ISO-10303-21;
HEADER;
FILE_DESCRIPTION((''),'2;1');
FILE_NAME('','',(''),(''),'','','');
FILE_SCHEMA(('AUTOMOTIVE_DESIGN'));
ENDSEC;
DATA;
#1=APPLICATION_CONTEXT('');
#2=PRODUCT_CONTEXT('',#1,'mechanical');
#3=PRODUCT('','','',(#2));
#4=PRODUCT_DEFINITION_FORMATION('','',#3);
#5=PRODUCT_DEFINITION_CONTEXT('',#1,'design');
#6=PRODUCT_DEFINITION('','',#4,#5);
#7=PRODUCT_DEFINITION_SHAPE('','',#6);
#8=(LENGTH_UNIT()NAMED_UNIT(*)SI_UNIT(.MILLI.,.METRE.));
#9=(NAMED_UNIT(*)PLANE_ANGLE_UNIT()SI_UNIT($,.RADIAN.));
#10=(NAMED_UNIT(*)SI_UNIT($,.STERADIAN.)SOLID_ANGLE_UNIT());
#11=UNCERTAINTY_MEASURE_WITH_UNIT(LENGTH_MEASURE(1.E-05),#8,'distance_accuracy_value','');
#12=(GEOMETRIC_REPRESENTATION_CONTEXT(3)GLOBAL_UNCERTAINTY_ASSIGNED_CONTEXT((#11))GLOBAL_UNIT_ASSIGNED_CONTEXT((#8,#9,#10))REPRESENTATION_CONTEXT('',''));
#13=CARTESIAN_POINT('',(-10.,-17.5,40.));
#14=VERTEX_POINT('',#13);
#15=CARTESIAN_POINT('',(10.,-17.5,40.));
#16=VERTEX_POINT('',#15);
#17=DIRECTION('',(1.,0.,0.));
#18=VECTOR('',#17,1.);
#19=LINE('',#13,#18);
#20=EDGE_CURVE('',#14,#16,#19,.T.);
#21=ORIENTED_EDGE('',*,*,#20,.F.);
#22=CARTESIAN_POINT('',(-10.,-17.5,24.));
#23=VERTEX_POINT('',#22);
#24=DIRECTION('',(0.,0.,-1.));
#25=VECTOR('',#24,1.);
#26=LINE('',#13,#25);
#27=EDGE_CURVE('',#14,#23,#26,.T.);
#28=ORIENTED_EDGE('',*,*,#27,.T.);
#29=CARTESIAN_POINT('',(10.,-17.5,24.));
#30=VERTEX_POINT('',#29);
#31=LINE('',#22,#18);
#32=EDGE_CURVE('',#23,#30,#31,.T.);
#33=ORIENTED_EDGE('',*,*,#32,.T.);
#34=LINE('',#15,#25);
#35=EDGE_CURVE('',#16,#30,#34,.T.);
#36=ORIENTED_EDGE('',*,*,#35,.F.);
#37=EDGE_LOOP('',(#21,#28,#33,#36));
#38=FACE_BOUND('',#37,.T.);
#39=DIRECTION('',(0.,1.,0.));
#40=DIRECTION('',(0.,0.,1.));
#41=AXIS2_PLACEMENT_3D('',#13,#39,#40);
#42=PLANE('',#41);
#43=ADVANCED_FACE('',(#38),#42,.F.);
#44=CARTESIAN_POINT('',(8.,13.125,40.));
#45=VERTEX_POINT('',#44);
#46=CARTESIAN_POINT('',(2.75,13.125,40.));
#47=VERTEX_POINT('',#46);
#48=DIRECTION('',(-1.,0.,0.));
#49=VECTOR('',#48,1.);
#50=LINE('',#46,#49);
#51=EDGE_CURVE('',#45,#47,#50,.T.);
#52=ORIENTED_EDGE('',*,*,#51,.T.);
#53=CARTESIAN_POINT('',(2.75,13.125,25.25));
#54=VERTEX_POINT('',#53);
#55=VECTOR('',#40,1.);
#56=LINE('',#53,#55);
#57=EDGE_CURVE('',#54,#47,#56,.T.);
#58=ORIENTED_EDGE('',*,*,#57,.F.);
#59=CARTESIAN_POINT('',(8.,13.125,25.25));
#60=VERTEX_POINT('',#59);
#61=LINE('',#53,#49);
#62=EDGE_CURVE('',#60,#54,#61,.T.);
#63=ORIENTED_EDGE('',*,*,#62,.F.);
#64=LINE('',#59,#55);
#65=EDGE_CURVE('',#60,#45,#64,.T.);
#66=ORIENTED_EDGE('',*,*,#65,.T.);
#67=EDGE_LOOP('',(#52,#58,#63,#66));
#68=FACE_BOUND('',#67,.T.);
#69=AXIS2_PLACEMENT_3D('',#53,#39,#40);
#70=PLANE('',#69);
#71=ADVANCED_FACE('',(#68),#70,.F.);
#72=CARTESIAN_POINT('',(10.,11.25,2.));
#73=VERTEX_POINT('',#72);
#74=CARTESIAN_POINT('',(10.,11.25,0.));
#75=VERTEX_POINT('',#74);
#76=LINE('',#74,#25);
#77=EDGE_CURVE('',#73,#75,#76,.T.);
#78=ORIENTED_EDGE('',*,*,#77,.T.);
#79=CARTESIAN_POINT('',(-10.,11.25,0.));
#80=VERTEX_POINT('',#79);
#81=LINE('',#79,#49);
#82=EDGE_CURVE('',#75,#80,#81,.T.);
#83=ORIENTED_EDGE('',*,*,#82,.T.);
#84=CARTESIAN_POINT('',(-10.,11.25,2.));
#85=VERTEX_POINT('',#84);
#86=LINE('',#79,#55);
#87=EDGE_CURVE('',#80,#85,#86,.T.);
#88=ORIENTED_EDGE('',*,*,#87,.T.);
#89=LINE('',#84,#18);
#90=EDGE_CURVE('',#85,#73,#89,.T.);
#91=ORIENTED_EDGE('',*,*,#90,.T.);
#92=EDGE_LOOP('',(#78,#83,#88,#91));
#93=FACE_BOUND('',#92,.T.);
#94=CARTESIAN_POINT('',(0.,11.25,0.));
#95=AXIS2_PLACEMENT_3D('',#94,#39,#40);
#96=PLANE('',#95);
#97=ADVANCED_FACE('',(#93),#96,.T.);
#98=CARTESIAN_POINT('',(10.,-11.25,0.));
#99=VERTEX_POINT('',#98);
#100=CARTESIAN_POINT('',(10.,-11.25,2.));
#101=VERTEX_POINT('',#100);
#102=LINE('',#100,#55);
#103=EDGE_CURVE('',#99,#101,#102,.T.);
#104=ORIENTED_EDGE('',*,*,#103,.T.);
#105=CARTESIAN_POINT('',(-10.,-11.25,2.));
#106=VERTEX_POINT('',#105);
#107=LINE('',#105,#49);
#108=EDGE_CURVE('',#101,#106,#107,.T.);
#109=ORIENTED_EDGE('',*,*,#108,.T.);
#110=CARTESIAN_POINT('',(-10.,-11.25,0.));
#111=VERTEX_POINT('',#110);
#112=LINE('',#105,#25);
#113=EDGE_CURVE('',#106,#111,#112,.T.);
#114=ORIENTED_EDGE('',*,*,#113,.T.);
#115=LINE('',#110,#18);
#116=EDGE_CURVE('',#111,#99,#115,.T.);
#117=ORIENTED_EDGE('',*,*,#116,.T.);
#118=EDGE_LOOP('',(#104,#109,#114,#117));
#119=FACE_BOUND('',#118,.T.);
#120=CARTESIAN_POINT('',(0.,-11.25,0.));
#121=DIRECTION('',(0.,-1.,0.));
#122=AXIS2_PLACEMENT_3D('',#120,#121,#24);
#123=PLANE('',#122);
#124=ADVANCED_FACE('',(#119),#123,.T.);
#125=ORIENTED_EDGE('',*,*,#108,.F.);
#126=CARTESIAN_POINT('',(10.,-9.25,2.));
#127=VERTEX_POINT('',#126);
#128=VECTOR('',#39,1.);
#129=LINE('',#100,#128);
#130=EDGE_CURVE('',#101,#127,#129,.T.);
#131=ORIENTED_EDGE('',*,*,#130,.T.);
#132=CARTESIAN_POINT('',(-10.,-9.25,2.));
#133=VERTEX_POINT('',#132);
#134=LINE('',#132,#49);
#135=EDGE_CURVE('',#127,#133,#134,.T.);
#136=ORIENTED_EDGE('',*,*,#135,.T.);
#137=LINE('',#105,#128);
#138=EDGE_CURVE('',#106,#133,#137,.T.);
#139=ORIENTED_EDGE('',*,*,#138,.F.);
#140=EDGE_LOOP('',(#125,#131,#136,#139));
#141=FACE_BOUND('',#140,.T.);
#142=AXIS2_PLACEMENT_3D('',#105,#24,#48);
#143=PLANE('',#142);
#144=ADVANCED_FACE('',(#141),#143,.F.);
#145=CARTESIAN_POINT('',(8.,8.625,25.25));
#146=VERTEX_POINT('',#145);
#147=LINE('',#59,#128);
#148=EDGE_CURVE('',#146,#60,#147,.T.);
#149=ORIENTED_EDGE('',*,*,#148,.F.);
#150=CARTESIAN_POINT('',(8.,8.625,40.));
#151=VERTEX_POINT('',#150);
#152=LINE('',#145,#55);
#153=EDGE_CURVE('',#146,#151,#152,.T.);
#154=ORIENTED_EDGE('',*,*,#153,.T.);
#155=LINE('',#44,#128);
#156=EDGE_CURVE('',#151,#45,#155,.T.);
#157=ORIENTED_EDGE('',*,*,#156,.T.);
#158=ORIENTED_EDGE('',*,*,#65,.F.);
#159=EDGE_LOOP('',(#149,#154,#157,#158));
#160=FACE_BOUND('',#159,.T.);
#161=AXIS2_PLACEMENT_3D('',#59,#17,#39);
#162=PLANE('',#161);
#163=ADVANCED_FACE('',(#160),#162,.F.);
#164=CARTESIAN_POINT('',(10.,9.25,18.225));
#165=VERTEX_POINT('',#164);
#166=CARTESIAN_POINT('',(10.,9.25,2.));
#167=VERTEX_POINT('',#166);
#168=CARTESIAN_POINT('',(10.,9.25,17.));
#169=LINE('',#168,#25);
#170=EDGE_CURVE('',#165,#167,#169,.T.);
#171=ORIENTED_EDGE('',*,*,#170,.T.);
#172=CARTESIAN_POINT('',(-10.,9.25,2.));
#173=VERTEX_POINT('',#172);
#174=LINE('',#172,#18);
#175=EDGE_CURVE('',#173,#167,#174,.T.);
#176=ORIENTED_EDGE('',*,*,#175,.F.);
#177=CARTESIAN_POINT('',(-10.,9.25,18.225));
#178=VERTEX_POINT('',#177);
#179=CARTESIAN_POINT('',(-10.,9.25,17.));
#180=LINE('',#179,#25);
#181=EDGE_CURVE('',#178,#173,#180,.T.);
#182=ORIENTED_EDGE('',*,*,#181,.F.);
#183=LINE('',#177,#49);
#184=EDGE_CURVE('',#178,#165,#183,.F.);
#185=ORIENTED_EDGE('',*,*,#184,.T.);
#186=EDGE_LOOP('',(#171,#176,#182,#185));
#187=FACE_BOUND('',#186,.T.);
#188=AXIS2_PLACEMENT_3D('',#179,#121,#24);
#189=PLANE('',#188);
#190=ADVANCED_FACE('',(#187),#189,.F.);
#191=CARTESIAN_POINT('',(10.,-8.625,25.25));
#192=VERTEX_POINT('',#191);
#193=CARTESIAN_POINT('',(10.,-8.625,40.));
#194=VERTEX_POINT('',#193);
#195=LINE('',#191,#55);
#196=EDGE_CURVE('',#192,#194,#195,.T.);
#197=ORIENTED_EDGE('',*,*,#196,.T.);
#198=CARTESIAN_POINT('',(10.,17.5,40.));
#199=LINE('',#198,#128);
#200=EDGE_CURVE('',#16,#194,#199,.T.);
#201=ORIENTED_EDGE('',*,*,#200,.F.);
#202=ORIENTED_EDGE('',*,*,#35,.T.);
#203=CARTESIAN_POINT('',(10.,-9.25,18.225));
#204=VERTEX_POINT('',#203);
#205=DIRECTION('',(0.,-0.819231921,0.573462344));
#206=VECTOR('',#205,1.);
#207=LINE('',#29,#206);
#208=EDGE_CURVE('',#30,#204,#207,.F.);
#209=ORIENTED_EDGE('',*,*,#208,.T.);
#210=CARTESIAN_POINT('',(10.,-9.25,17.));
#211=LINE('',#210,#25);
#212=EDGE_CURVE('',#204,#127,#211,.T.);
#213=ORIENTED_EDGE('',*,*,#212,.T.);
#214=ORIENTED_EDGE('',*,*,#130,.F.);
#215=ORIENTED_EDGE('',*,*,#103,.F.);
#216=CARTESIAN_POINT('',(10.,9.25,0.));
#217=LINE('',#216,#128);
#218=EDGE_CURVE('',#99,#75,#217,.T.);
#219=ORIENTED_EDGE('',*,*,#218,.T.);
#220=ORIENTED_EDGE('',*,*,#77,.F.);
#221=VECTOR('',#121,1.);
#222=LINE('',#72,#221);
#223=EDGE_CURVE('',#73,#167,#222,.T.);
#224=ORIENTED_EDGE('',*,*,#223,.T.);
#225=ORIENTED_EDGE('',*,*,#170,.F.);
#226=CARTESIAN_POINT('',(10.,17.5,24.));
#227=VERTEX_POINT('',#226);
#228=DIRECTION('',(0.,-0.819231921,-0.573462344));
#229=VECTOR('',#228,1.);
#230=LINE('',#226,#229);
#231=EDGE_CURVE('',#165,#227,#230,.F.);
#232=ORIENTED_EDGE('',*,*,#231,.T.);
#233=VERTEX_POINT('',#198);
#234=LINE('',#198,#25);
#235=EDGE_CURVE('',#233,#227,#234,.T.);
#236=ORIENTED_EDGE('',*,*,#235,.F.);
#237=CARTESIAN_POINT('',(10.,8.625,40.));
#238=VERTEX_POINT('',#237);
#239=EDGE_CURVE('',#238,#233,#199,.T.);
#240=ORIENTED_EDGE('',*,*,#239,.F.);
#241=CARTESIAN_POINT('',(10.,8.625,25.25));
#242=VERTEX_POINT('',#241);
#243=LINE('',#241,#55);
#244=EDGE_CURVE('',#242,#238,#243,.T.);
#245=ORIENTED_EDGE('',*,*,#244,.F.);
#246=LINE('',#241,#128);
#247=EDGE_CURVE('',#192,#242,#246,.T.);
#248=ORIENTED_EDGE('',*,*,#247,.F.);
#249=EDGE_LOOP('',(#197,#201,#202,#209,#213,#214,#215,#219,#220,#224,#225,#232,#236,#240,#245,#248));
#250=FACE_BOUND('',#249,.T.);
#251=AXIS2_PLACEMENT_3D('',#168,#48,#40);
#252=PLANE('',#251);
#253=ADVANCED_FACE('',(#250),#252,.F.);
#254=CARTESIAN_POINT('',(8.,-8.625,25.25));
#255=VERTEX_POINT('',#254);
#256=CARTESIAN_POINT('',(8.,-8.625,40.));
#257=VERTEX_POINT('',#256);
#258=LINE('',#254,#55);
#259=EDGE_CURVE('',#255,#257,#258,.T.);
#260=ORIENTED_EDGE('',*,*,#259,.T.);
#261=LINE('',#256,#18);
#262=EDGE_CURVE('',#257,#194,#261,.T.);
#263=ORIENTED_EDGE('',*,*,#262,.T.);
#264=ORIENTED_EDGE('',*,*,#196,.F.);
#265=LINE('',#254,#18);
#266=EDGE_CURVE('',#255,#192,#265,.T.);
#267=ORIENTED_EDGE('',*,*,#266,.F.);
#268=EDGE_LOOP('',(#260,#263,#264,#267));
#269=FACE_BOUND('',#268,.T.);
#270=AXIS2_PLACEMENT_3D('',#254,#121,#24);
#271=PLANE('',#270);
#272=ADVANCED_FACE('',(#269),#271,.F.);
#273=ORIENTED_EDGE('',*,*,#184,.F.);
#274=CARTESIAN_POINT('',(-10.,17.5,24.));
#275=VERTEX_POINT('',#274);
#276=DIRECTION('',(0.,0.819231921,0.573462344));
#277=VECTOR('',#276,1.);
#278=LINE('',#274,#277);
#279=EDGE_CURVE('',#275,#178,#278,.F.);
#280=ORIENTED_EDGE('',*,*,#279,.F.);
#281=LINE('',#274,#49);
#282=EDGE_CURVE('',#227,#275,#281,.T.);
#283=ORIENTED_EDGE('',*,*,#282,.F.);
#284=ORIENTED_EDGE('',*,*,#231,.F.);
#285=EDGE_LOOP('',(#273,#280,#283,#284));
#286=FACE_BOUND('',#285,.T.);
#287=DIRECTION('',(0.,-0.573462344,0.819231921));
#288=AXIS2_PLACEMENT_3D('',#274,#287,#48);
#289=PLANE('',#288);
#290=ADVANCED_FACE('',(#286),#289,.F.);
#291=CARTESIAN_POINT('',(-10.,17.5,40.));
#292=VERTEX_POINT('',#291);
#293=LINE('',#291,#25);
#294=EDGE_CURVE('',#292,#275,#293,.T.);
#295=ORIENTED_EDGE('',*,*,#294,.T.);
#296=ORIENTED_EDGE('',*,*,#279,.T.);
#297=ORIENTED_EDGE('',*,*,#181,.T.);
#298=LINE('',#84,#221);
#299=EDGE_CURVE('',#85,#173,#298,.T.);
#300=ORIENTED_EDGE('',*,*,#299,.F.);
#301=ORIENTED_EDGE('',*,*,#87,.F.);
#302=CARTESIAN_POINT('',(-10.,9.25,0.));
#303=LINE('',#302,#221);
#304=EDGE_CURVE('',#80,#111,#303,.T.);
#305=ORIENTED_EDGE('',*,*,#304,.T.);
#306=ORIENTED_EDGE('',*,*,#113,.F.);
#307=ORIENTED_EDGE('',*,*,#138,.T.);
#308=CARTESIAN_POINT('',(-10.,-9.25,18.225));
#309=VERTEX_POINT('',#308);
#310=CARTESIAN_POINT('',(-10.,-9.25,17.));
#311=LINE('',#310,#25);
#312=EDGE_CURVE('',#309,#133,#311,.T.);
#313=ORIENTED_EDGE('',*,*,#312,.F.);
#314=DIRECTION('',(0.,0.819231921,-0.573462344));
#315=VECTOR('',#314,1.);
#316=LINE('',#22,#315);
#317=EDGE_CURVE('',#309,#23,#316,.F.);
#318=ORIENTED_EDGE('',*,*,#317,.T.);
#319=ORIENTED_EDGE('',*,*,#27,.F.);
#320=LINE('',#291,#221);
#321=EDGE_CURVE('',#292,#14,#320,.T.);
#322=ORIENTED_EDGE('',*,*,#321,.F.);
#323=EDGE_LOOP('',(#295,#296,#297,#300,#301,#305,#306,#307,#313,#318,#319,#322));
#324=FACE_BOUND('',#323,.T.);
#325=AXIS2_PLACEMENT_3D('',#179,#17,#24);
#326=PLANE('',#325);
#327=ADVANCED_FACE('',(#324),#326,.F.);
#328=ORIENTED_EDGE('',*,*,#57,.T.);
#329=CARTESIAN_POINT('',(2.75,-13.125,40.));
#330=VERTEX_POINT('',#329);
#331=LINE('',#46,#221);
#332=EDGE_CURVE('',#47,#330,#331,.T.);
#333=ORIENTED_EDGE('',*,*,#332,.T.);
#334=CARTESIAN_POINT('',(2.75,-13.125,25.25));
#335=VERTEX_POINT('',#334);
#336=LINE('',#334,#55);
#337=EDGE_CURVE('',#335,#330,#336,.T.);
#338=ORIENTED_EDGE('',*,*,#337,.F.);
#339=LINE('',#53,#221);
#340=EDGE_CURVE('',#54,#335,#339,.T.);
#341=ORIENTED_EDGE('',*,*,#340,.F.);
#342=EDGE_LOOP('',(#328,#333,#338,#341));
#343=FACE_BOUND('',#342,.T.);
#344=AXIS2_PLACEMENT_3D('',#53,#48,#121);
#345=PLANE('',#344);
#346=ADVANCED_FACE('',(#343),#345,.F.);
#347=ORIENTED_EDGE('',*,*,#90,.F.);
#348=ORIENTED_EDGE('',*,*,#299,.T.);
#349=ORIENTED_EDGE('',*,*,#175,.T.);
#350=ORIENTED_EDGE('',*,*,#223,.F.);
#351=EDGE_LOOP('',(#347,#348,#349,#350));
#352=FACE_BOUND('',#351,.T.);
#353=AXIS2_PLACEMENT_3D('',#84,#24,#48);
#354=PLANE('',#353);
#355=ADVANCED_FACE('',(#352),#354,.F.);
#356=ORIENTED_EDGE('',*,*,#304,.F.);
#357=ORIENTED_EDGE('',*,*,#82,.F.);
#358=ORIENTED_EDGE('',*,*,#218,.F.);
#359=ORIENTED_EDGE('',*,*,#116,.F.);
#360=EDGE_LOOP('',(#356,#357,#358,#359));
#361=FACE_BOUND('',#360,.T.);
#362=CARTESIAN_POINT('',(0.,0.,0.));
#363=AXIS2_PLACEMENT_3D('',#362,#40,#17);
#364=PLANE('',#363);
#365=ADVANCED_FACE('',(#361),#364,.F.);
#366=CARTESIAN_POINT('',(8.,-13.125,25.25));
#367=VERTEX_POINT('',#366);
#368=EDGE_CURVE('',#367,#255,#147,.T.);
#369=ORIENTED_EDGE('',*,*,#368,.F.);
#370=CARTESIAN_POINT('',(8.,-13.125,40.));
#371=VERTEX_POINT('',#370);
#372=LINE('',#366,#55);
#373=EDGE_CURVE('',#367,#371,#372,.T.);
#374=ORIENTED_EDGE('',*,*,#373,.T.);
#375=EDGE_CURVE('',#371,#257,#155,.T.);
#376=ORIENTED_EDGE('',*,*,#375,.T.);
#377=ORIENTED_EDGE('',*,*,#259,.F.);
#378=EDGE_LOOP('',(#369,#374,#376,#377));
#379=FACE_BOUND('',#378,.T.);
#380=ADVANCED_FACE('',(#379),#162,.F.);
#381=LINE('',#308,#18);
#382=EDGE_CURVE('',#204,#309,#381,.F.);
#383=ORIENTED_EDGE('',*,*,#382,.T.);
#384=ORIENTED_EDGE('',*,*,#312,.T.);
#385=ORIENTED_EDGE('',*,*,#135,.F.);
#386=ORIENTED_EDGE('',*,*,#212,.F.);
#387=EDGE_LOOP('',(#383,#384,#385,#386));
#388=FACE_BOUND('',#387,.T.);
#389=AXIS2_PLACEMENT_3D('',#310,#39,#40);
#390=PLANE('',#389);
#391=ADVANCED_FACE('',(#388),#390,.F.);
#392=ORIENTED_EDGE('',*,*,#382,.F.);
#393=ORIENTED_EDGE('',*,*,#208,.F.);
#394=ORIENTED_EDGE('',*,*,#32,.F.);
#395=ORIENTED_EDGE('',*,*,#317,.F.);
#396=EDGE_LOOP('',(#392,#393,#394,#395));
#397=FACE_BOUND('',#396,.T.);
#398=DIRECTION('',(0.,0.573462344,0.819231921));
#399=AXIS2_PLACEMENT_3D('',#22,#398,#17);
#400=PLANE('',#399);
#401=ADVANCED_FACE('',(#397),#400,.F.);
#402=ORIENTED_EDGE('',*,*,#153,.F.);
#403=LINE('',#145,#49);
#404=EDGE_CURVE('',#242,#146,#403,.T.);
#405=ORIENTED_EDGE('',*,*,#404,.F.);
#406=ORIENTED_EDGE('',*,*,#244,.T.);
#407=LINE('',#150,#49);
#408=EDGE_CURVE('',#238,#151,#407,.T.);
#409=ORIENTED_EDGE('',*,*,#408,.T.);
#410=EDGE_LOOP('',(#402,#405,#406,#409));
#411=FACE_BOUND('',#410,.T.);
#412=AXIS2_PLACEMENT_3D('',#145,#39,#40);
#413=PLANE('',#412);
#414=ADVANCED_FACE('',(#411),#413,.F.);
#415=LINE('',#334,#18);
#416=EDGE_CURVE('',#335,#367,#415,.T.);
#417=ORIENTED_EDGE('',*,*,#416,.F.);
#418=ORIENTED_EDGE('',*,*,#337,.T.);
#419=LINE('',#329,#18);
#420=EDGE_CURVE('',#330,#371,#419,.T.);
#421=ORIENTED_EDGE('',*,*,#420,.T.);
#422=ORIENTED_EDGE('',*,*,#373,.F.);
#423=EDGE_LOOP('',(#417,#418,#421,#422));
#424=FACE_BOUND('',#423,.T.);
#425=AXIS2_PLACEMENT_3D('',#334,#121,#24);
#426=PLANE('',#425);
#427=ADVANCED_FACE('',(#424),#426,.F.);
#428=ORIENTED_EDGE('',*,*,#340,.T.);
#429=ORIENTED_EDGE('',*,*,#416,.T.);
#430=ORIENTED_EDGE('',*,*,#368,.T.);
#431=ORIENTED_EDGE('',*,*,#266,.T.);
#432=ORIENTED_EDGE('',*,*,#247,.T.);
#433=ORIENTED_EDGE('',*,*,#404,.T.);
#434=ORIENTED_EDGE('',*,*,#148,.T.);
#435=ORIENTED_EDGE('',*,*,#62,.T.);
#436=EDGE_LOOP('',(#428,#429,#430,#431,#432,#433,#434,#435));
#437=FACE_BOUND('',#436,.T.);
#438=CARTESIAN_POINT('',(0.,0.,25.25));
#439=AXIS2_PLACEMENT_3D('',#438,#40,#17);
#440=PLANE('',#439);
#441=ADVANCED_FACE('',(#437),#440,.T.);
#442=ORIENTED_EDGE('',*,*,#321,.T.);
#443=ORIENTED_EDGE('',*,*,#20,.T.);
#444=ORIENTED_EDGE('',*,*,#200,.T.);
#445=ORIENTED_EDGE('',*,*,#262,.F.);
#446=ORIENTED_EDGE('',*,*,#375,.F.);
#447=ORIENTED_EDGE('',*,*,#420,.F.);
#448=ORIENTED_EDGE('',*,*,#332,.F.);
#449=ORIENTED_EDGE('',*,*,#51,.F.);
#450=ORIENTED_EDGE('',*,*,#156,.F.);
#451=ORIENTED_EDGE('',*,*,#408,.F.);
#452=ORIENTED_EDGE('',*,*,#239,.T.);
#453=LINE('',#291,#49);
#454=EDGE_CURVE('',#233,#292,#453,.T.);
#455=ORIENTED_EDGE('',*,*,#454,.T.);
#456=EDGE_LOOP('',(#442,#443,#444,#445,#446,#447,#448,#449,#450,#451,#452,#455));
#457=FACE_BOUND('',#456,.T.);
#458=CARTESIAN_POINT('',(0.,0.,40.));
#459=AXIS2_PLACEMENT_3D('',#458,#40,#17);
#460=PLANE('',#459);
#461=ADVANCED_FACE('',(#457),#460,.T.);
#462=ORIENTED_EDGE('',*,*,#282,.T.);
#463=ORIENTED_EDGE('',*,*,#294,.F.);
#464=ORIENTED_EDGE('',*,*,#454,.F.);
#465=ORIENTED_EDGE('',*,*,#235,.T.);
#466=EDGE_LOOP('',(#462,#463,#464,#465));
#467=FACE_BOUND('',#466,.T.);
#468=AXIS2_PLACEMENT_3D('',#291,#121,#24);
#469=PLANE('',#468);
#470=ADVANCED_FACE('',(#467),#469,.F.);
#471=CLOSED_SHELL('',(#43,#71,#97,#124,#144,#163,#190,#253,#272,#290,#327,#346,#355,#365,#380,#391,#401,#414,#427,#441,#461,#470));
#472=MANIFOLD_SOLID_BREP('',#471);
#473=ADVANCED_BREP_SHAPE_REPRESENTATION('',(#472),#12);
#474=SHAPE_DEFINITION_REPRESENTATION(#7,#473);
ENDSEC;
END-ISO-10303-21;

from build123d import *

# Parameters (mm, degrees)
IZIM1_W                     = 20
IZIM1_H                     = 18.5
Y_KSEKLIK_EKSTR_ZYON1_DEPTH = 17
IZIM2_W                     = 20
IZIM2_H                     = 2
Y_KSEKLIK_EKSTR_ZYON2_DEPTH = 2
IZIM3_W                     = 20
IZIM3_H                     = 2
Y_KSEKLIK_EKSTR_ZYON3_DEPTH = 2
IZIM4_W                     = 20
IZIM4_H                     = 35
Y_KSEKLIK_EKSTR_ZYON4_DEPTH = 23
PAH1_SIZE                   = 7
PAH1_SIZE_2                 = 10
PAH2_SIZE                   = 7
PAH2_SIZE_2                 = 10
IZIM5_W                     = 5.25
IZIM5_H                     = 26.25
KES_EKSTR_ZYON2_DEPTH       = 14.75
IZIM6_W                     = 2
IZIM6_H                     = 17.25
KES_EKSTR_ZYON3_DEPTH       = 14.75


with BuildPart() as part:
    # Çizim1 → Yükseklik-Ekstrüzyon1 (new body)
    with BuildSketch(Plane.XY):
        Rectangle(IZIM1_W, IZIM1_H)
    extrude(amount=Y_KSEKLIK_EKSTR_ZYON1_DEPTH)

    # Çizim2 → Yükseklik-Ekstrüzyon2 (add)
    with BuildSketch(Plane.XZ.offset(9.25)):
        with Locations((0, 1)):
            Rectangle(IZIM2_W, IZIM2_H)
    extrude(amount=Y_KSEKLIK_EKSTR_ZYON2_DEPTH)

    # Çizim3 → Yükseklik-Ekstrüzyon3 (add)
    with BuildSketch(Plane(origin=(0, 9.25, 0), x_dir=(1, 0, 0), z_dir=(0, 1, 0))):
        with Locations((0, -1)):
            Rectangle(IZIM3_W, IZIM3_H)
    extrude(amount=Y_KSEKLIK_EKSTR_ZYON3_DEPTH)

    # Çizim4 → Yükseklik-Ekstrüzyon4 (add)
    with BuildSketch(Plane.XY.offset(17)):
        Rectangle(IZIM4_W, IZIM4_H)
    extrude(amount=Y_KSEKLIK_EKSTR_ZYON4_DEPTH)

    # Pah1
    # the kernel refuses this chamfer: 10, 7 mm, written as the material it takes off along each edge
    with BuildSketch(Plane(origin=(-35.825599626, 17.5, 17), x_dir=(0, 0.045281396304095924, 0.9989742715149131), z_dir=(1, 0, 0))) as pah1_piece_1_section:
        Polygon((PAH1_SIZE * 0.998974271515, PAH1_SIZE * 0.0452813963041), (-PAH1_SIZE_2 * 0.0452813963041, PAH1_SIZE_2 * 0.998974271515), (0, 0), align=None)
    pah1_piece_1 = extrude(amount=71.651199251, mode=Mode.PRIVATE)
    pah1_piece_1 = split(pah1_piece_1, bisect_by=Plane(origin=(0, 9.25, 19.372622849), z_dir=(0, 1, 0)), keep=Keep.TOP, mode=Mode.PRIVATE)
    add(pah1_piece_1, mode=Mode.SUBTRACT)

    # Pah2
    # the kernel refuses this chamfer: 10, 7 mm, written as the material it takes off along each edge
    with BuildSketch(Plane(origin=(35.825599626, -17.5, 17), x_dir=(0, -0.045281396304095924, 0.9989742715149131), z_dir=(-1, 0, 0))) as pah2_piece_1_section:
        Polygon((PAH2_SIZE * 0.998974271515, PAH2_SIZE * 0.0452813963041), (-PAH2_SIZE_2 * 0.0452813963041, PAH2_SIZE_2 * 0.998974271515), (0, 0), align=None)
    pah2_piece_1 = extrude(amount=71.651199251, mode=Mode.PRIVATE)
    pah2_piece_1 = split(pah2_piece_1, bisect_by=Plane(origin=(0, -9.25, 19.372622849), z_dir=(0, -1, 0)), keep=Keep.TOP, mode=Mode.PRIVATE)
    add(pah2_piece_1, mode=Mode.SUBTRACT)

    # Çizim5 → Kes-Ekstrüzyon2 (cut)
    with BuildSketch(Plane.XY.offset(40)):
        with Locations((5.375, 0)):
            Rectangle(IZIM5_W, IZIM5_H)
    extrude(amount=-KES_EKSTR_ZYON2_DEPTH, mode=Mode.SUBTRACT)

    # Çizim6 → Kes-Ekstrüzyon3 (cut)
    with BuildSketch(Plane.XY.offset(40)):
        with Locations((9, 0)):
            Rectangle(IZIM6_W, IZIM6_H)
    extrude(amount=-KES_EKSTR_ZYON3_DEPTH, mode=Mode.SUBTRACT)


solid = part.part
